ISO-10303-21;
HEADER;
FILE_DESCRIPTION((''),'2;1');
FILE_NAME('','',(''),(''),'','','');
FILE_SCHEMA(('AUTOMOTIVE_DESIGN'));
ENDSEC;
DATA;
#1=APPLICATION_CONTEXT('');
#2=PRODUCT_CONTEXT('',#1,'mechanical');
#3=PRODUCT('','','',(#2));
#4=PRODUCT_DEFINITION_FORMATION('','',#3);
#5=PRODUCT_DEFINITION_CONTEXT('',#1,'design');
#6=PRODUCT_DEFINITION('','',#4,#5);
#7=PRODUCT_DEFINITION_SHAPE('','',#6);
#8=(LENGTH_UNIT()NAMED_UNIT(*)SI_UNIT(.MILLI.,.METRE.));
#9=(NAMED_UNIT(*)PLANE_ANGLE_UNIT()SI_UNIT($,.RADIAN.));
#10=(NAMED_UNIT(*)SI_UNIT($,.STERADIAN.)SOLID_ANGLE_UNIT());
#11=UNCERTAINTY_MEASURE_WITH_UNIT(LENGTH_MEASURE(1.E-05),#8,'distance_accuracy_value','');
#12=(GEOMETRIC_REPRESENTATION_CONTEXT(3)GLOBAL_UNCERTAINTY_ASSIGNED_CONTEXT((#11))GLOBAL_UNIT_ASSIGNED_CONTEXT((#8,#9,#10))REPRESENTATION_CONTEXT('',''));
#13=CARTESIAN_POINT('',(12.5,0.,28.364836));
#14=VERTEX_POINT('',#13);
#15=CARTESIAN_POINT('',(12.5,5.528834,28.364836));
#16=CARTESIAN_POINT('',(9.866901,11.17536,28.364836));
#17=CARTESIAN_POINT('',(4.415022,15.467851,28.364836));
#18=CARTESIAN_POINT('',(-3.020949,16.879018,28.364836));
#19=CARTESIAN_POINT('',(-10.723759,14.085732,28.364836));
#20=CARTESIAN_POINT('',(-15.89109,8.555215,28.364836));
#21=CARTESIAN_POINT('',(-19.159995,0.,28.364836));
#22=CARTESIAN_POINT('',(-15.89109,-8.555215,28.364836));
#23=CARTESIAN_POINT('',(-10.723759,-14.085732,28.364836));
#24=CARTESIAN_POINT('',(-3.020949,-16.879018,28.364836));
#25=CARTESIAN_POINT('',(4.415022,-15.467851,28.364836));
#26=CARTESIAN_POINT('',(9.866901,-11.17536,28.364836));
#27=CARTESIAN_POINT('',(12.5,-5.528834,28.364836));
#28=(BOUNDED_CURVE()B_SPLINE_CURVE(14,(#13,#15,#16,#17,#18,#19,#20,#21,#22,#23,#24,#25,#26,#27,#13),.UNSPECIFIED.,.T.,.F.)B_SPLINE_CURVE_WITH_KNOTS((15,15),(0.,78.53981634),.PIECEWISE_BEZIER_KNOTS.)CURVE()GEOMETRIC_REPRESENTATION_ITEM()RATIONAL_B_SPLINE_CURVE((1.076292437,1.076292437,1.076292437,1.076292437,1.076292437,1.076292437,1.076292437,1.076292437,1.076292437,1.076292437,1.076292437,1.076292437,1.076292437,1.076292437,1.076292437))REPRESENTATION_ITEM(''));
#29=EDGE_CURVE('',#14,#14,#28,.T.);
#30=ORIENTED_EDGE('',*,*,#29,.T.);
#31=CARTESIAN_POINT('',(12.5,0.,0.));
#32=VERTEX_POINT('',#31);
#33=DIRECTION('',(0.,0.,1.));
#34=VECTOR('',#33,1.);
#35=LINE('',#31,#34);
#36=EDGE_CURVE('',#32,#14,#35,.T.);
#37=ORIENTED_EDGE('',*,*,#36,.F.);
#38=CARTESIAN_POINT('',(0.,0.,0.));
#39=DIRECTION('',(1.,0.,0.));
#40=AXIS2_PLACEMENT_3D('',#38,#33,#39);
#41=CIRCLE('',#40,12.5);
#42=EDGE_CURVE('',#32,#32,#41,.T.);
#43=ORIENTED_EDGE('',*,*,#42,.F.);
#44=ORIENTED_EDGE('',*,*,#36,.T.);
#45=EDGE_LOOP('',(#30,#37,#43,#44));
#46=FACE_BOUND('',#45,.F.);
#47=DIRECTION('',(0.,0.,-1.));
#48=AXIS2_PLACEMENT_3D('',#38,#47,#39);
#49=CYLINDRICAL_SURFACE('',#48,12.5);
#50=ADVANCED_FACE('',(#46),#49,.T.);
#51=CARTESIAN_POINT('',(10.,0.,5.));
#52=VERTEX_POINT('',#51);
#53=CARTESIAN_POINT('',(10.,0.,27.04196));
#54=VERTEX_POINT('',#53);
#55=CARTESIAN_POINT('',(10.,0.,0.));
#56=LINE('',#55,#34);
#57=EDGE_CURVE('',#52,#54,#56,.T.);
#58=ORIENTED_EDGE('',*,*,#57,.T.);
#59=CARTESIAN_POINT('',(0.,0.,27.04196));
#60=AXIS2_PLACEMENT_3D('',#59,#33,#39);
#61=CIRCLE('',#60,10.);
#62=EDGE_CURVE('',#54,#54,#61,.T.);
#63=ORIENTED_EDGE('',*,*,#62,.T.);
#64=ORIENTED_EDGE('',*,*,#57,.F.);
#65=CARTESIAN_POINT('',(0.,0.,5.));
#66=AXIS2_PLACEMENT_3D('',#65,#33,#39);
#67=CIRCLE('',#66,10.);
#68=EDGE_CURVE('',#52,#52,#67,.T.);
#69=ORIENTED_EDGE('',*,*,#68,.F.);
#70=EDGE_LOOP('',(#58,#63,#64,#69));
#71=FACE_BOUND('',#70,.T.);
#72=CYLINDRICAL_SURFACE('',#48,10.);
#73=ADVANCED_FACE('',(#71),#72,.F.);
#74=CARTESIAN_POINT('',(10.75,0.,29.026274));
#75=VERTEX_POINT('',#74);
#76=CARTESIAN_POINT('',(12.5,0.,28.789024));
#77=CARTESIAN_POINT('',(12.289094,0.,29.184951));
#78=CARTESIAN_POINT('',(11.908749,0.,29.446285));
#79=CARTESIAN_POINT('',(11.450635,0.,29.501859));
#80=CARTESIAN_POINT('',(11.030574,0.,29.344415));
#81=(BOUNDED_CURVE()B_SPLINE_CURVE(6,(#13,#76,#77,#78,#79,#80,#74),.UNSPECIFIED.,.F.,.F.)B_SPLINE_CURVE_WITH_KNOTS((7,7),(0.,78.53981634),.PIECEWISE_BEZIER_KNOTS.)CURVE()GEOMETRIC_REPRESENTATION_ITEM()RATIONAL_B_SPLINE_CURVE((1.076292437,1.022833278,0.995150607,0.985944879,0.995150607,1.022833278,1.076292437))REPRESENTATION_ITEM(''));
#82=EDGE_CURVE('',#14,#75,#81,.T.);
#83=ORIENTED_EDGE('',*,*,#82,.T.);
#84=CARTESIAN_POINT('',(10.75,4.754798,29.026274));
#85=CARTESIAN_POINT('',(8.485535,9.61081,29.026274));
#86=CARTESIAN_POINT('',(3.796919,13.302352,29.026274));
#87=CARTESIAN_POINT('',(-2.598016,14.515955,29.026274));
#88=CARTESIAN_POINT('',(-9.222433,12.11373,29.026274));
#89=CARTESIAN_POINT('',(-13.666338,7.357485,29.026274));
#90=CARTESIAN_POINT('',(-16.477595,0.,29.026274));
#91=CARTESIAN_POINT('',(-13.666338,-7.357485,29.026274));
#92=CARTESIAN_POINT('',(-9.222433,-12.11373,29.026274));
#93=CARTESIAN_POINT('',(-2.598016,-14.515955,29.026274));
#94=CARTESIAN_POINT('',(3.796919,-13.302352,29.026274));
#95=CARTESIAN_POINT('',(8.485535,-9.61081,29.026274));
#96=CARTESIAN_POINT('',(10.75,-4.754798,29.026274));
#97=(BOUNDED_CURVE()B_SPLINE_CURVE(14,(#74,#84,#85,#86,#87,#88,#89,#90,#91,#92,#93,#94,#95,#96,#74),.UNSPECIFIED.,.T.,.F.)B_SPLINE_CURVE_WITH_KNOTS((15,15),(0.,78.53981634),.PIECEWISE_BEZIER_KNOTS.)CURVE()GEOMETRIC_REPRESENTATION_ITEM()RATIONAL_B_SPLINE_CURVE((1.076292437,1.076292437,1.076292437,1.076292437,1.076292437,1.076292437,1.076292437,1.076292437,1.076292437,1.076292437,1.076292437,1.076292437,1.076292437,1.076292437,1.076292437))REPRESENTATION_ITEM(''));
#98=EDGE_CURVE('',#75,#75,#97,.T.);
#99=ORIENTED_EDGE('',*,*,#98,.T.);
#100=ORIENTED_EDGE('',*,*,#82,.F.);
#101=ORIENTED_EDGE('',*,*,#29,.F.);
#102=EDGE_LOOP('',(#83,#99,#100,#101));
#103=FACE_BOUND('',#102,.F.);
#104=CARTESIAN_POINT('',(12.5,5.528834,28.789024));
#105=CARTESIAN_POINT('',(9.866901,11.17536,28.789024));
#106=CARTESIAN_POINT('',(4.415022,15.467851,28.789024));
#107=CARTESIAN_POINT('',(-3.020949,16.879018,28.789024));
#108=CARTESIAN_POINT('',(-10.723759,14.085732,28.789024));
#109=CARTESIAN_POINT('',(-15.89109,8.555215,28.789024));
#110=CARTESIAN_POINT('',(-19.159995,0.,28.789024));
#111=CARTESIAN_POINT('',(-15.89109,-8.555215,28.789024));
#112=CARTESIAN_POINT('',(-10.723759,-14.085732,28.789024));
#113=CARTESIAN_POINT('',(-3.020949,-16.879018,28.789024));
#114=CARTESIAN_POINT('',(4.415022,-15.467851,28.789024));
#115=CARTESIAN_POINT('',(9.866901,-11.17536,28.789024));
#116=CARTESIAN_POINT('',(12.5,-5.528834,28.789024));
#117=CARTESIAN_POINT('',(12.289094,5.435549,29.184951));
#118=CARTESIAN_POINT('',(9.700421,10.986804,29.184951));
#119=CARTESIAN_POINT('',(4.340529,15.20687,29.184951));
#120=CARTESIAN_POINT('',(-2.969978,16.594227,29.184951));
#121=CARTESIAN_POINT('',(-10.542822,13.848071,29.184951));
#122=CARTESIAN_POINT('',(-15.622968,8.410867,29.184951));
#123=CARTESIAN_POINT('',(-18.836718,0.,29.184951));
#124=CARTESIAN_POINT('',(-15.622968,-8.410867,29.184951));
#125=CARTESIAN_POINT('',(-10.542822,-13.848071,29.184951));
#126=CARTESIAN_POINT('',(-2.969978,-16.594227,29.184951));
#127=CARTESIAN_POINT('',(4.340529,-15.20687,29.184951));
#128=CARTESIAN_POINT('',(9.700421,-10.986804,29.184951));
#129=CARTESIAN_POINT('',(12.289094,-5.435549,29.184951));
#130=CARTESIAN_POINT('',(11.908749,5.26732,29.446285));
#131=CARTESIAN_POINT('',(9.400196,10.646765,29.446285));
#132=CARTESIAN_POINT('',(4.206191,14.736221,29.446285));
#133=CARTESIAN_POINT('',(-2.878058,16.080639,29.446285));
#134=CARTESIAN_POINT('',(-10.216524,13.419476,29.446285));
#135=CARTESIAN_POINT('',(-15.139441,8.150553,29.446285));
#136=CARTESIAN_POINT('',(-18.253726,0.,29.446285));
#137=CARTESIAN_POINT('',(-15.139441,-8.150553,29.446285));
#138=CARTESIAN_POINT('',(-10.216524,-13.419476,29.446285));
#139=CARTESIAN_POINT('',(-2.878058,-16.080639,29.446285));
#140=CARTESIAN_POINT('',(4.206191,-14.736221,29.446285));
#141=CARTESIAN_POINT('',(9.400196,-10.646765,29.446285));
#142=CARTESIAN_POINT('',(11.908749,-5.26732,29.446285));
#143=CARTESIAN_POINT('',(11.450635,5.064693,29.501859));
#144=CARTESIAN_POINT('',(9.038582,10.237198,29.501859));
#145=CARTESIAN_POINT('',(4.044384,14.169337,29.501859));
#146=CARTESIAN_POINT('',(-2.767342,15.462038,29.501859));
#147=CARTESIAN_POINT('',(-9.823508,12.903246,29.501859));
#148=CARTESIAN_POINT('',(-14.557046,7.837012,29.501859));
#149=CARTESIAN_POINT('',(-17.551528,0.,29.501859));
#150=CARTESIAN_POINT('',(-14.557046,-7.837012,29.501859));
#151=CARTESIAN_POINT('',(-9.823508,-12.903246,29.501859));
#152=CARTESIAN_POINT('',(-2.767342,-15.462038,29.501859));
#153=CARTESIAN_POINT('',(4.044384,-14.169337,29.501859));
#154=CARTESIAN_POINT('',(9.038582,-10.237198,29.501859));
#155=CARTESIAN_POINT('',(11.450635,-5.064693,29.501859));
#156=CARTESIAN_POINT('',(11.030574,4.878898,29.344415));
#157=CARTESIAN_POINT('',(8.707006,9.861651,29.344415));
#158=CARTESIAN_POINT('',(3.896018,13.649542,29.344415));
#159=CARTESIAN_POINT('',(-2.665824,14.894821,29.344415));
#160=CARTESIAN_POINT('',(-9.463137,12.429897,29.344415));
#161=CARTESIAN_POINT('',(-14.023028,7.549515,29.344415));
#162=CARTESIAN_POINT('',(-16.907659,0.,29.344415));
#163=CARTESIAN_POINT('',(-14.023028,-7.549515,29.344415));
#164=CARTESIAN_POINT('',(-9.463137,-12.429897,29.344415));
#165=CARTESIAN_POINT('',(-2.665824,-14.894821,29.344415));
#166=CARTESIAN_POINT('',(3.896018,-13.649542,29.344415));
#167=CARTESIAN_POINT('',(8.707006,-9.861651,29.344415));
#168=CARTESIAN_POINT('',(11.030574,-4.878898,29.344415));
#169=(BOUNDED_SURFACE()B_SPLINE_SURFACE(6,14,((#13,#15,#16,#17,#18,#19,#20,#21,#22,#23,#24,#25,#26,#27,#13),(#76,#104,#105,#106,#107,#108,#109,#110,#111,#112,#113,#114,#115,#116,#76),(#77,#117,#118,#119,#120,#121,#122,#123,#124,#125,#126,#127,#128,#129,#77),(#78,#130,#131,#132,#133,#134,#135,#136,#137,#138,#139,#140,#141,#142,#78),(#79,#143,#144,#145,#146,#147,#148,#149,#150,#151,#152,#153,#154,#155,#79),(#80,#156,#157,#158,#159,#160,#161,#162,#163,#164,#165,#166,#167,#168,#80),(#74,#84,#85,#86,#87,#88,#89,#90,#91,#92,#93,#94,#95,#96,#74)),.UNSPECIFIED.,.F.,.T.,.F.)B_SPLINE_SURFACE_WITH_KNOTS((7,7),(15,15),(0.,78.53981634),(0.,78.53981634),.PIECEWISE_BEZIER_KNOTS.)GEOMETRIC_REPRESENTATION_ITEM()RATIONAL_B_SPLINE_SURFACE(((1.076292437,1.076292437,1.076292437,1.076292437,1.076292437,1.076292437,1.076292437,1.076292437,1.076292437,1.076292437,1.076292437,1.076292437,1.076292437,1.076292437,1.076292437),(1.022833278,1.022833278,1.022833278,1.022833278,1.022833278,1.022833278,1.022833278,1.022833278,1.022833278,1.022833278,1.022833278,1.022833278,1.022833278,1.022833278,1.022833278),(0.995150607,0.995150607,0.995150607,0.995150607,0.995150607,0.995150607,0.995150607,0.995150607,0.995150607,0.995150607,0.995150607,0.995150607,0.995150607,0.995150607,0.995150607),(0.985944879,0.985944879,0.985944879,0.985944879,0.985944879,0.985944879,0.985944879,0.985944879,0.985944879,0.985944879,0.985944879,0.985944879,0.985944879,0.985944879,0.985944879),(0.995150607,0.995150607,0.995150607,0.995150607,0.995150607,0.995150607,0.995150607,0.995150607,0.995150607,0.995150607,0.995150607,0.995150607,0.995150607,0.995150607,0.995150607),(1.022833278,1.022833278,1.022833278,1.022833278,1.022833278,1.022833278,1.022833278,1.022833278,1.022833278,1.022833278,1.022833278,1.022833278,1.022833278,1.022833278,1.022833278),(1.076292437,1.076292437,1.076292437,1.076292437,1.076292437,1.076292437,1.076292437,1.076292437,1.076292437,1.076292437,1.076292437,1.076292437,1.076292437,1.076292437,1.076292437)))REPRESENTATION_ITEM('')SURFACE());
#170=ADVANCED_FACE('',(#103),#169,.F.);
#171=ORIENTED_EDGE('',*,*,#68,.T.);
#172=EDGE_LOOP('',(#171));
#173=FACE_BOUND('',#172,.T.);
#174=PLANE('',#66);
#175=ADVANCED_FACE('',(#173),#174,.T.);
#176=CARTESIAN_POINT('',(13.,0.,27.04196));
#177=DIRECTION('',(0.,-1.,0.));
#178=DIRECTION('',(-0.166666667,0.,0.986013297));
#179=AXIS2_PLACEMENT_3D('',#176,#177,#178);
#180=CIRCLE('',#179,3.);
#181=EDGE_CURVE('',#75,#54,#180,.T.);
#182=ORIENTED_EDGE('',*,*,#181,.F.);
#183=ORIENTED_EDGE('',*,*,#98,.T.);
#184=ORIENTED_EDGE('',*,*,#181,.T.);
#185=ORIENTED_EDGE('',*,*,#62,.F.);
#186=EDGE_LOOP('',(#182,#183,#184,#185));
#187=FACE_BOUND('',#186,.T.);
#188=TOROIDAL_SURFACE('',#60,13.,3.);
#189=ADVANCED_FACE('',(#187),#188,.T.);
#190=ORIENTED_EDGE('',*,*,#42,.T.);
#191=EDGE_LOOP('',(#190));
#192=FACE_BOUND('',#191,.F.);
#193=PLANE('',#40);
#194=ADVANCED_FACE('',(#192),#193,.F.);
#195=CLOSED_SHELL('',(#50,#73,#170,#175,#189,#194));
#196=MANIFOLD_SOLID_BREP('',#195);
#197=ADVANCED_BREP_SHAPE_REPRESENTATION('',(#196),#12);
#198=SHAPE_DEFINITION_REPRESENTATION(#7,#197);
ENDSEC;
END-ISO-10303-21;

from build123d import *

# Parameters (mm, degrees)
F0_R     = 10
F1_DEPTH = 5
F0_R_2   = 12.5
F2_DEPTH = 30
F4_R     = 1


# Not quite as in the source:
# - a fillet or chamfer that OpenCascade refuses, or shapes differently, is made with other operations: its cross-section is extruded or revolved along the edge and cut away or added


with BuildPart() as f1:
    # F0 (on Top) → F1 (new body)
    with BuildSketch(Plane.XY):
        Circle(F0_R)
    extrude(amount=F1_DEPTH)

    # F0 (on Top) → F2 (join)
    with BuildSketch(Plane.XY):
        Circle(F0_R_2)
        Circle(F0_R, mode=Mode.SUBTRACT)
    extrude(amount=F2_DEPTH)

    # F3: fillet of radius 3 on 1 edges, made by hand

    # F3_s1 → F3_t2 (revolve, cut)
    with BuildSketch(Plane.XZ):
        with BuildLine():
            ThreePointArc((12.5, 30), (10.7087121525, 28.9784517816), (10, 27.0419601084))
            Line((10, 27.0419601084), (10, 30))
            Line((10, 30), (12.5, 30))
        make_face()
    revolve(axis=Axis((0, 0, 30), (0, 0, 1)), mode=Mode.SUBTRACT)

    # F4
    f4_edges = [f1.edges().sort_by_distance(p)[0] for p in [
        (-12.5, 0, 30),
    ]]
    fillet(f4_edges, radius=F4_R)


solid = f1.part
